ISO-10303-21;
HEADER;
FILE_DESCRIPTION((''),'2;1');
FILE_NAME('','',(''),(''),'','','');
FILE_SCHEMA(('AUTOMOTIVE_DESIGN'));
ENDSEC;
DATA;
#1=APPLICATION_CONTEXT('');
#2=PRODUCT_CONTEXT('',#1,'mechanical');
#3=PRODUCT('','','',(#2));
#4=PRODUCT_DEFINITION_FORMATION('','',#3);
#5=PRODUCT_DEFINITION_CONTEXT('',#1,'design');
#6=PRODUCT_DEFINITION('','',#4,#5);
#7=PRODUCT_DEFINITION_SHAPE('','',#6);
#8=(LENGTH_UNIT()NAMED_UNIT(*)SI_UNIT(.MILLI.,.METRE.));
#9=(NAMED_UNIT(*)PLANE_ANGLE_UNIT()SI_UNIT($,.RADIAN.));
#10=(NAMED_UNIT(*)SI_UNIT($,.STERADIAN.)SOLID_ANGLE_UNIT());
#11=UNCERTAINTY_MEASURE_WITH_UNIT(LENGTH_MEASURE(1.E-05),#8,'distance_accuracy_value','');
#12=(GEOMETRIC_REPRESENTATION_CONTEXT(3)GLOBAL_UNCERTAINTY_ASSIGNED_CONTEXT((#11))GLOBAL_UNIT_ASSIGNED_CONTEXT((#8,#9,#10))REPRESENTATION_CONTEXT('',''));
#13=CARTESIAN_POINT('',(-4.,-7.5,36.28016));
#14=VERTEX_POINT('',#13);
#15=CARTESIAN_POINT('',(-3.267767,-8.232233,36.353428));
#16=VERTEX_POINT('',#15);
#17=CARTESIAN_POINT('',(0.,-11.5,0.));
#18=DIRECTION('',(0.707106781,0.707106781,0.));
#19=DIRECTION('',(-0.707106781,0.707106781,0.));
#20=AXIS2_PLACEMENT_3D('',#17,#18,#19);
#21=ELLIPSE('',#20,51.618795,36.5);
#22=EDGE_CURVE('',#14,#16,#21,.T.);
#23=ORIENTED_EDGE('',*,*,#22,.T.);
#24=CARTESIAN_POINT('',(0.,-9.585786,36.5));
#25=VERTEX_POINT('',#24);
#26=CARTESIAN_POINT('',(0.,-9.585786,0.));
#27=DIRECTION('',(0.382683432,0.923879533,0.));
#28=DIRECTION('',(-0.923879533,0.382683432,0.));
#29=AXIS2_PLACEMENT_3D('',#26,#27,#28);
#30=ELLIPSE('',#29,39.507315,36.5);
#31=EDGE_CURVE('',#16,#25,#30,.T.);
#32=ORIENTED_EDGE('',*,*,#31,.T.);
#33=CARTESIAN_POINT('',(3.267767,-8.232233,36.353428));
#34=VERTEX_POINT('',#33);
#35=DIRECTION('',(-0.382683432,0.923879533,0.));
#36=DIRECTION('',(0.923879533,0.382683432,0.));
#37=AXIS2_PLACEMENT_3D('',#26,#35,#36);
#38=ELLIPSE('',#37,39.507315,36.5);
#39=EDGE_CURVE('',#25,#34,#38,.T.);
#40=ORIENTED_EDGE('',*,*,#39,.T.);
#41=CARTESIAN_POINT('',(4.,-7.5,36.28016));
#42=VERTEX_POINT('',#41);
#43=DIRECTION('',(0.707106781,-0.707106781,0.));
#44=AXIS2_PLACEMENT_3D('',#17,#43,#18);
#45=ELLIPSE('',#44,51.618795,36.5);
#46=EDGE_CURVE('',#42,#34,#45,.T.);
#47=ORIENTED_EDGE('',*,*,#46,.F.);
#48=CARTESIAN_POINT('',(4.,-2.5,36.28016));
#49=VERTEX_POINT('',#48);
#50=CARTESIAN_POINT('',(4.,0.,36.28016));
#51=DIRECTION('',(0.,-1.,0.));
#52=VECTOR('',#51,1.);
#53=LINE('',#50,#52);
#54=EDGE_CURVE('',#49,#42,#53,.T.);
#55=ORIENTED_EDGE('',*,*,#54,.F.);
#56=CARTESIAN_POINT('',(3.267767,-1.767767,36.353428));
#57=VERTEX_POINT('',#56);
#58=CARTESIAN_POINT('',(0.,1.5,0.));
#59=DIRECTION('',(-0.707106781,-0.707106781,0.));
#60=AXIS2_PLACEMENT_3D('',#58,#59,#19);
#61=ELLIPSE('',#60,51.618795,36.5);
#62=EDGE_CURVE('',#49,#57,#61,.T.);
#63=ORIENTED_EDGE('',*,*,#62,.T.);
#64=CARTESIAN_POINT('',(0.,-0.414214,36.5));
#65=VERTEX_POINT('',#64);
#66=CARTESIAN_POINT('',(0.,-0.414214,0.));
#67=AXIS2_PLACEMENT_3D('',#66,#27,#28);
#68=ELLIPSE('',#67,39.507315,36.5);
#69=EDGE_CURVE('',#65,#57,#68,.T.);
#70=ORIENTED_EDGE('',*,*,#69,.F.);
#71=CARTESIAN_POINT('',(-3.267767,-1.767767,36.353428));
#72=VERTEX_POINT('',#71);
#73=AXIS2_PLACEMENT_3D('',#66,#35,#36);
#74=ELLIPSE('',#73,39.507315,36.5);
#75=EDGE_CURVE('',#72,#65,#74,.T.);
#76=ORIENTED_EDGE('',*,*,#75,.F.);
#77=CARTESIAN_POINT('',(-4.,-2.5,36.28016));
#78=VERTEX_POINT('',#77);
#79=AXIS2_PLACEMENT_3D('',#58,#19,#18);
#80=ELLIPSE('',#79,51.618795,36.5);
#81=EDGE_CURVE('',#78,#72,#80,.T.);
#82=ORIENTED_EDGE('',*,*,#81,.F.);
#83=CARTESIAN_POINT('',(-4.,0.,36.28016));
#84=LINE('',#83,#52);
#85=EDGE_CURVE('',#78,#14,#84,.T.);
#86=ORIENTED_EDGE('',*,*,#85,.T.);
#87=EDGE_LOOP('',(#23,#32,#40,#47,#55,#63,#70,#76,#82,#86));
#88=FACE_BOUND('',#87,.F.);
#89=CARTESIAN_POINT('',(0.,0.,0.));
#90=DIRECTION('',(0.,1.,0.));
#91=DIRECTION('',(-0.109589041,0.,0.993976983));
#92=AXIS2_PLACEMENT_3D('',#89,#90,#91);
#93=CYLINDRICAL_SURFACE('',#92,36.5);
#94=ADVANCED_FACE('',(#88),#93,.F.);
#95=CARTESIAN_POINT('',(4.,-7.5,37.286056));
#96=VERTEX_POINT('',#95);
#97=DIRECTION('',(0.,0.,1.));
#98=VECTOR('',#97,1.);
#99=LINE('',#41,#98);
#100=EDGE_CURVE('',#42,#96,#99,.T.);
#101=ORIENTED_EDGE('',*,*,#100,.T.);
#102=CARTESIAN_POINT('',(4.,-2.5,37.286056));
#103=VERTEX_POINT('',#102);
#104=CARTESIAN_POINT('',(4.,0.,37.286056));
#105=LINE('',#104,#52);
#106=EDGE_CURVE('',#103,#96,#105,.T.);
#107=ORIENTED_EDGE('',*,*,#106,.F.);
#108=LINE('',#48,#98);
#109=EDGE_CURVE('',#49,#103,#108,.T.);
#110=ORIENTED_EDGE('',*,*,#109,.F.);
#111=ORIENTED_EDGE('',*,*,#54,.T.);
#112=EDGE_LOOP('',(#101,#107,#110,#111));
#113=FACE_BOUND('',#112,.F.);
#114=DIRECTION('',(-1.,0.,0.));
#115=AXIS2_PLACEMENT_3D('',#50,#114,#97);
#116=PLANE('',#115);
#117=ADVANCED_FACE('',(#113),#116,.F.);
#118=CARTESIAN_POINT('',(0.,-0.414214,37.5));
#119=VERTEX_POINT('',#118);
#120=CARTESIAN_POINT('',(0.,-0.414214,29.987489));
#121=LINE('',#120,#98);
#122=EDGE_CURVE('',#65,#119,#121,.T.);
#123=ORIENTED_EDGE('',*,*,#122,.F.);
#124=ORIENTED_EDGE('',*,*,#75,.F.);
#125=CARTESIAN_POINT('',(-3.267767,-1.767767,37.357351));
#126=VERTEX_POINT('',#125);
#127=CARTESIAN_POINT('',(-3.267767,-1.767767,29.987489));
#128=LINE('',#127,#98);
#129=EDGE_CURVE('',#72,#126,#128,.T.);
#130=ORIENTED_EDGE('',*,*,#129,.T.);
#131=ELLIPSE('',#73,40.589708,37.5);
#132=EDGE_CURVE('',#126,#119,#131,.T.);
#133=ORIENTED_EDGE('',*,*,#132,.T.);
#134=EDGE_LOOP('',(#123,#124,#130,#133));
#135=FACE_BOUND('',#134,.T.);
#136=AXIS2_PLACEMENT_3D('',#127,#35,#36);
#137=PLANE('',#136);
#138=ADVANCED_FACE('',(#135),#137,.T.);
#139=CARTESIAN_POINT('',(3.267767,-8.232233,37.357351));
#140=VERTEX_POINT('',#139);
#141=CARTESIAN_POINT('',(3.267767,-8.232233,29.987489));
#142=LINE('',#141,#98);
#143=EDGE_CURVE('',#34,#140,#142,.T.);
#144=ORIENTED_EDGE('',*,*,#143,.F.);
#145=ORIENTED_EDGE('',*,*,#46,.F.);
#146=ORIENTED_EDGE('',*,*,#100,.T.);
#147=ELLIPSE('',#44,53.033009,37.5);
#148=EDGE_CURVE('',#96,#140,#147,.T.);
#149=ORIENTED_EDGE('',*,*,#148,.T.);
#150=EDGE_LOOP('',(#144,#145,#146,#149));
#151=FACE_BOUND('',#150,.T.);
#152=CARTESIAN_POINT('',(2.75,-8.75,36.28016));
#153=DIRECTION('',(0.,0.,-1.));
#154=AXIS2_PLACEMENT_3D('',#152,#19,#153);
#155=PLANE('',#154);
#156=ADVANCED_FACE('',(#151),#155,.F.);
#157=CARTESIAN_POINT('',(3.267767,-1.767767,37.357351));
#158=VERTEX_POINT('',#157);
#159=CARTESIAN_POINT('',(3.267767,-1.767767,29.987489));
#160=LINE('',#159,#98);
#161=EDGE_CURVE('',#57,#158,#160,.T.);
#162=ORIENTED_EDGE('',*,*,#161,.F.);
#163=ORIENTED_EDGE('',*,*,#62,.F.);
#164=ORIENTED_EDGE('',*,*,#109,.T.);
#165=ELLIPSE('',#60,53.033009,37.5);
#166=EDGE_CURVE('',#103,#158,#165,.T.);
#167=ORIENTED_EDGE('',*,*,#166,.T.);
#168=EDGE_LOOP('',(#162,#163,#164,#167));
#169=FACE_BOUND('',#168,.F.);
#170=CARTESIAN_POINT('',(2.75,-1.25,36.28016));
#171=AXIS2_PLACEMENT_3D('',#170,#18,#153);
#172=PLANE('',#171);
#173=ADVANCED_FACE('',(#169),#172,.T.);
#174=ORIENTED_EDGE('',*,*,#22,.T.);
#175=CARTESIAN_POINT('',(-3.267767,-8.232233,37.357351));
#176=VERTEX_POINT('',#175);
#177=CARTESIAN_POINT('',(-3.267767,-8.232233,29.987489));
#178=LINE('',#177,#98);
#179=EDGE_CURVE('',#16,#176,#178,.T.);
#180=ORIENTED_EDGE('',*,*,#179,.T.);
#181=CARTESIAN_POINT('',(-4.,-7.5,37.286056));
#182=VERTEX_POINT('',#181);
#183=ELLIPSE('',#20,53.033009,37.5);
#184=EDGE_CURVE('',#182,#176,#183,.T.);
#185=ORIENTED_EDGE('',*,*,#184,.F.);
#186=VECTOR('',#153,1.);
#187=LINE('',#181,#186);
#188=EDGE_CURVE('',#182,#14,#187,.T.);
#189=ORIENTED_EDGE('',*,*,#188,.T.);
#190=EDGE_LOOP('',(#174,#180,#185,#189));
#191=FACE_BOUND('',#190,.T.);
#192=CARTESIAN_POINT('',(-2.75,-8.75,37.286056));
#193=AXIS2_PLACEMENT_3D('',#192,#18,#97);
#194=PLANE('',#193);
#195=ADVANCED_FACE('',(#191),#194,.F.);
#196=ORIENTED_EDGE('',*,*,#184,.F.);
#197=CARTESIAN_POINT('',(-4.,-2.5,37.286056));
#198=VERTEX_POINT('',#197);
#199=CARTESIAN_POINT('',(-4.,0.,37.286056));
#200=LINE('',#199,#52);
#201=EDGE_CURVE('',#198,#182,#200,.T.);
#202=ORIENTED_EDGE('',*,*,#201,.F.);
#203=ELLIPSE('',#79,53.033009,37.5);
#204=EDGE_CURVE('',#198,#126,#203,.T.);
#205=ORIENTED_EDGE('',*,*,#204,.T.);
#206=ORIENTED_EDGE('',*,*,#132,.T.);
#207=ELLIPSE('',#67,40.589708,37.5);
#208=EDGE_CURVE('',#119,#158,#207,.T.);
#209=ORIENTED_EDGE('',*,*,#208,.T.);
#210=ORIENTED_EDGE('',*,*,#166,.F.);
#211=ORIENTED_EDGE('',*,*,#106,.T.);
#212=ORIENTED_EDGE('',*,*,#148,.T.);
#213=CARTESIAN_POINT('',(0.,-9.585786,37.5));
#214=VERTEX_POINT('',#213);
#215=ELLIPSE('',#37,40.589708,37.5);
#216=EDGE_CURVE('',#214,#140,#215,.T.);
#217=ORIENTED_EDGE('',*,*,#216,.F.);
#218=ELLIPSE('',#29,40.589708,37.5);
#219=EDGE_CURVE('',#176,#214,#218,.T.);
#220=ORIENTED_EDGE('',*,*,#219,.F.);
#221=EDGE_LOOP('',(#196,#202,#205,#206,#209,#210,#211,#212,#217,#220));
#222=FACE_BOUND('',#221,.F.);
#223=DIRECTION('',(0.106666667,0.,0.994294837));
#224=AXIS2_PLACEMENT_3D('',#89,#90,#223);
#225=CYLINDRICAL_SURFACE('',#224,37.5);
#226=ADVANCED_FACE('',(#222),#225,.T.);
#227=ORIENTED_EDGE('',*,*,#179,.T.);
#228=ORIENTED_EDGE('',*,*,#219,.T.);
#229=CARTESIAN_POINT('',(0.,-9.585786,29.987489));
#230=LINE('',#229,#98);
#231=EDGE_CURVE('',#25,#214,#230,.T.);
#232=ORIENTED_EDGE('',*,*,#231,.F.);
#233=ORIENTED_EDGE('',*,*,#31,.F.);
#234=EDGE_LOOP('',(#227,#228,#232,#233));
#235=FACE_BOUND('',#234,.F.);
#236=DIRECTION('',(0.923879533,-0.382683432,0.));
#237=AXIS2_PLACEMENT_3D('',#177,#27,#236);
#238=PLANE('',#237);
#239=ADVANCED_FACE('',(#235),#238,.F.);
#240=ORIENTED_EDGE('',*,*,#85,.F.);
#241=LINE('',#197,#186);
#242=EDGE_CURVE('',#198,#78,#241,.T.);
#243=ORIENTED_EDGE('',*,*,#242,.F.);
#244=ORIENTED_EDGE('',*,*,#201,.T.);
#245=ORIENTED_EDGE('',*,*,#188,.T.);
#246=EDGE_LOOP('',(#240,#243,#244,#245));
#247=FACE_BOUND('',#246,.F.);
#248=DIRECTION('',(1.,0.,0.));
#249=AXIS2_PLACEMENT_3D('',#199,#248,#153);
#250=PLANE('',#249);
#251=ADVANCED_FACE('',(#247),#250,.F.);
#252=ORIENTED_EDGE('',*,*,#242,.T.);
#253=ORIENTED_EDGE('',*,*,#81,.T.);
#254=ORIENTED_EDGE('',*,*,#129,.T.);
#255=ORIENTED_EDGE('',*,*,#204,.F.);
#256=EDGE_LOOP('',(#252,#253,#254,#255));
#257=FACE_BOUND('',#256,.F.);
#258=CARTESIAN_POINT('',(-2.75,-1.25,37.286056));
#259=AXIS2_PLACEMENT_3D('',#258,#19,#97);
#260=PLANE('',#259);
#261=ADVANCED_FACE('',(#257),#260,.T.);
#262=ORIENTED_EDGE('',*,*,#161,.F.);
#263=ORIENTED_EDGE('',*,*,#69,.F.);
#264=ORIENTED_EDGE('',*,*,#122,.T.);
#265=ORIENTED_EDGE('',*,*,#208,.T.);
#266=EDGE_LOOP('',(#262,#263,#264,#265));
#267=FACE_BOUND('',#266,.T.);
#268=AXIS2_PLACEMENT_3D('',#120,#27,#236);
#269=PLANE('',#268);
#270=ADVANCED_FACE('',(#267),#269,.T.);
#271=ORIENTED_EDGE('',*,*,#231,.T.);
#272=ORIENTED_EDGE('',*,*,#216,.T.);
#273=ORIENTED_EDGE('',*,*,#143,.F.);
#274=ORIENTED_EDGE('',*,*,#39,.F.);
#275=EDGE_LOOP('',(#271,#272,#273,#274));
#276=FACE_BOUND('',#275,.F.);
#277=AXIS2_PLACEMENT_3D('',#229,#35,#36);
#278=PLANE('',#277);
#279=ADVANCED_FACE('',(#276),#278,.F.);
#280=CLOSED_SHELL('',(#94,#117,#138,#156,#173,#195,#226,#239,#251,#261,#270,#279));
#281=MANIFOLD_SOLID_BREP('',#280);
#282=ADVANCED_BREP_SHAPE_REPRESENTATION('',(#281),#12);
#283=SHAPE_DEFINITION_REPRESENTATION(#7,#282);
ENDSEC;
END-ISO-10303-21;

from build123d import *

# Parameters (mm, degrees)
F1_DEPTH    = 10
F2_SIZE     = 2.5
F3_T1_DEPTH = 13.9641748973


# Not quite as in the source:
# - a fillet or chamfer that OpenCascade refuses, or shapes differently, is made with other operations: its cross-section is extruded or revolved along the edge and cut away or added


with BuildPart() as f1:
    # F0 (on Front) → F1 (new body)
    with BuildSketch(Plane.XZ):
        with BuildLine():
            Line((4, 36.2801598673), (4, 37.286056375))
            ThreePointArc((4, 37.286056375), (0, 37.5), (-4, 37.286056375))
            Line((-4, 37.286056375), (-4, 36.2801598673))
            ThreePointArc((-4, 36.2801598673), (0, 36.5), (4, 36.2801598673))
        make_face()
    extrude(amount=F1_DEPTH)

    # F2
    f2_edges = [f1.edges().sort_by_distance(p)[0] for p in [
        (-4, -10, 36.783108),
        (-4, 0, 36.783108),
        (4, 0, 36.783108),
        (4, -10, 36.783108),
    ]]
    chamfer(f2_edges, length=F2_SIZE)

    # F3: chamfer of 2.5 on 4 edges, made by hand

    # F3_s2 → F3_t1 (cut)
    with BuildSketch(Plane.XY.offset(29.9874890754)):
        Polygon((-3.267766953, -8.232233047), (1, -10), (-1.5, -10), align=None)
        Polygon((-1, -10), (3.267766953, -8.232233047), (1.5, -10), align=None)
        Polygon((-3.267766953, -1.767766953), (1, 0), (-1.5, 0), align=None)
        Polygon((-1, 0), (3.267766953, -1.767766953), (1.5, 0), align=None)
    extrude(amount=F3_T1_DEPTH, mode=Mode.SUBTRACT)


solid = f1.part
